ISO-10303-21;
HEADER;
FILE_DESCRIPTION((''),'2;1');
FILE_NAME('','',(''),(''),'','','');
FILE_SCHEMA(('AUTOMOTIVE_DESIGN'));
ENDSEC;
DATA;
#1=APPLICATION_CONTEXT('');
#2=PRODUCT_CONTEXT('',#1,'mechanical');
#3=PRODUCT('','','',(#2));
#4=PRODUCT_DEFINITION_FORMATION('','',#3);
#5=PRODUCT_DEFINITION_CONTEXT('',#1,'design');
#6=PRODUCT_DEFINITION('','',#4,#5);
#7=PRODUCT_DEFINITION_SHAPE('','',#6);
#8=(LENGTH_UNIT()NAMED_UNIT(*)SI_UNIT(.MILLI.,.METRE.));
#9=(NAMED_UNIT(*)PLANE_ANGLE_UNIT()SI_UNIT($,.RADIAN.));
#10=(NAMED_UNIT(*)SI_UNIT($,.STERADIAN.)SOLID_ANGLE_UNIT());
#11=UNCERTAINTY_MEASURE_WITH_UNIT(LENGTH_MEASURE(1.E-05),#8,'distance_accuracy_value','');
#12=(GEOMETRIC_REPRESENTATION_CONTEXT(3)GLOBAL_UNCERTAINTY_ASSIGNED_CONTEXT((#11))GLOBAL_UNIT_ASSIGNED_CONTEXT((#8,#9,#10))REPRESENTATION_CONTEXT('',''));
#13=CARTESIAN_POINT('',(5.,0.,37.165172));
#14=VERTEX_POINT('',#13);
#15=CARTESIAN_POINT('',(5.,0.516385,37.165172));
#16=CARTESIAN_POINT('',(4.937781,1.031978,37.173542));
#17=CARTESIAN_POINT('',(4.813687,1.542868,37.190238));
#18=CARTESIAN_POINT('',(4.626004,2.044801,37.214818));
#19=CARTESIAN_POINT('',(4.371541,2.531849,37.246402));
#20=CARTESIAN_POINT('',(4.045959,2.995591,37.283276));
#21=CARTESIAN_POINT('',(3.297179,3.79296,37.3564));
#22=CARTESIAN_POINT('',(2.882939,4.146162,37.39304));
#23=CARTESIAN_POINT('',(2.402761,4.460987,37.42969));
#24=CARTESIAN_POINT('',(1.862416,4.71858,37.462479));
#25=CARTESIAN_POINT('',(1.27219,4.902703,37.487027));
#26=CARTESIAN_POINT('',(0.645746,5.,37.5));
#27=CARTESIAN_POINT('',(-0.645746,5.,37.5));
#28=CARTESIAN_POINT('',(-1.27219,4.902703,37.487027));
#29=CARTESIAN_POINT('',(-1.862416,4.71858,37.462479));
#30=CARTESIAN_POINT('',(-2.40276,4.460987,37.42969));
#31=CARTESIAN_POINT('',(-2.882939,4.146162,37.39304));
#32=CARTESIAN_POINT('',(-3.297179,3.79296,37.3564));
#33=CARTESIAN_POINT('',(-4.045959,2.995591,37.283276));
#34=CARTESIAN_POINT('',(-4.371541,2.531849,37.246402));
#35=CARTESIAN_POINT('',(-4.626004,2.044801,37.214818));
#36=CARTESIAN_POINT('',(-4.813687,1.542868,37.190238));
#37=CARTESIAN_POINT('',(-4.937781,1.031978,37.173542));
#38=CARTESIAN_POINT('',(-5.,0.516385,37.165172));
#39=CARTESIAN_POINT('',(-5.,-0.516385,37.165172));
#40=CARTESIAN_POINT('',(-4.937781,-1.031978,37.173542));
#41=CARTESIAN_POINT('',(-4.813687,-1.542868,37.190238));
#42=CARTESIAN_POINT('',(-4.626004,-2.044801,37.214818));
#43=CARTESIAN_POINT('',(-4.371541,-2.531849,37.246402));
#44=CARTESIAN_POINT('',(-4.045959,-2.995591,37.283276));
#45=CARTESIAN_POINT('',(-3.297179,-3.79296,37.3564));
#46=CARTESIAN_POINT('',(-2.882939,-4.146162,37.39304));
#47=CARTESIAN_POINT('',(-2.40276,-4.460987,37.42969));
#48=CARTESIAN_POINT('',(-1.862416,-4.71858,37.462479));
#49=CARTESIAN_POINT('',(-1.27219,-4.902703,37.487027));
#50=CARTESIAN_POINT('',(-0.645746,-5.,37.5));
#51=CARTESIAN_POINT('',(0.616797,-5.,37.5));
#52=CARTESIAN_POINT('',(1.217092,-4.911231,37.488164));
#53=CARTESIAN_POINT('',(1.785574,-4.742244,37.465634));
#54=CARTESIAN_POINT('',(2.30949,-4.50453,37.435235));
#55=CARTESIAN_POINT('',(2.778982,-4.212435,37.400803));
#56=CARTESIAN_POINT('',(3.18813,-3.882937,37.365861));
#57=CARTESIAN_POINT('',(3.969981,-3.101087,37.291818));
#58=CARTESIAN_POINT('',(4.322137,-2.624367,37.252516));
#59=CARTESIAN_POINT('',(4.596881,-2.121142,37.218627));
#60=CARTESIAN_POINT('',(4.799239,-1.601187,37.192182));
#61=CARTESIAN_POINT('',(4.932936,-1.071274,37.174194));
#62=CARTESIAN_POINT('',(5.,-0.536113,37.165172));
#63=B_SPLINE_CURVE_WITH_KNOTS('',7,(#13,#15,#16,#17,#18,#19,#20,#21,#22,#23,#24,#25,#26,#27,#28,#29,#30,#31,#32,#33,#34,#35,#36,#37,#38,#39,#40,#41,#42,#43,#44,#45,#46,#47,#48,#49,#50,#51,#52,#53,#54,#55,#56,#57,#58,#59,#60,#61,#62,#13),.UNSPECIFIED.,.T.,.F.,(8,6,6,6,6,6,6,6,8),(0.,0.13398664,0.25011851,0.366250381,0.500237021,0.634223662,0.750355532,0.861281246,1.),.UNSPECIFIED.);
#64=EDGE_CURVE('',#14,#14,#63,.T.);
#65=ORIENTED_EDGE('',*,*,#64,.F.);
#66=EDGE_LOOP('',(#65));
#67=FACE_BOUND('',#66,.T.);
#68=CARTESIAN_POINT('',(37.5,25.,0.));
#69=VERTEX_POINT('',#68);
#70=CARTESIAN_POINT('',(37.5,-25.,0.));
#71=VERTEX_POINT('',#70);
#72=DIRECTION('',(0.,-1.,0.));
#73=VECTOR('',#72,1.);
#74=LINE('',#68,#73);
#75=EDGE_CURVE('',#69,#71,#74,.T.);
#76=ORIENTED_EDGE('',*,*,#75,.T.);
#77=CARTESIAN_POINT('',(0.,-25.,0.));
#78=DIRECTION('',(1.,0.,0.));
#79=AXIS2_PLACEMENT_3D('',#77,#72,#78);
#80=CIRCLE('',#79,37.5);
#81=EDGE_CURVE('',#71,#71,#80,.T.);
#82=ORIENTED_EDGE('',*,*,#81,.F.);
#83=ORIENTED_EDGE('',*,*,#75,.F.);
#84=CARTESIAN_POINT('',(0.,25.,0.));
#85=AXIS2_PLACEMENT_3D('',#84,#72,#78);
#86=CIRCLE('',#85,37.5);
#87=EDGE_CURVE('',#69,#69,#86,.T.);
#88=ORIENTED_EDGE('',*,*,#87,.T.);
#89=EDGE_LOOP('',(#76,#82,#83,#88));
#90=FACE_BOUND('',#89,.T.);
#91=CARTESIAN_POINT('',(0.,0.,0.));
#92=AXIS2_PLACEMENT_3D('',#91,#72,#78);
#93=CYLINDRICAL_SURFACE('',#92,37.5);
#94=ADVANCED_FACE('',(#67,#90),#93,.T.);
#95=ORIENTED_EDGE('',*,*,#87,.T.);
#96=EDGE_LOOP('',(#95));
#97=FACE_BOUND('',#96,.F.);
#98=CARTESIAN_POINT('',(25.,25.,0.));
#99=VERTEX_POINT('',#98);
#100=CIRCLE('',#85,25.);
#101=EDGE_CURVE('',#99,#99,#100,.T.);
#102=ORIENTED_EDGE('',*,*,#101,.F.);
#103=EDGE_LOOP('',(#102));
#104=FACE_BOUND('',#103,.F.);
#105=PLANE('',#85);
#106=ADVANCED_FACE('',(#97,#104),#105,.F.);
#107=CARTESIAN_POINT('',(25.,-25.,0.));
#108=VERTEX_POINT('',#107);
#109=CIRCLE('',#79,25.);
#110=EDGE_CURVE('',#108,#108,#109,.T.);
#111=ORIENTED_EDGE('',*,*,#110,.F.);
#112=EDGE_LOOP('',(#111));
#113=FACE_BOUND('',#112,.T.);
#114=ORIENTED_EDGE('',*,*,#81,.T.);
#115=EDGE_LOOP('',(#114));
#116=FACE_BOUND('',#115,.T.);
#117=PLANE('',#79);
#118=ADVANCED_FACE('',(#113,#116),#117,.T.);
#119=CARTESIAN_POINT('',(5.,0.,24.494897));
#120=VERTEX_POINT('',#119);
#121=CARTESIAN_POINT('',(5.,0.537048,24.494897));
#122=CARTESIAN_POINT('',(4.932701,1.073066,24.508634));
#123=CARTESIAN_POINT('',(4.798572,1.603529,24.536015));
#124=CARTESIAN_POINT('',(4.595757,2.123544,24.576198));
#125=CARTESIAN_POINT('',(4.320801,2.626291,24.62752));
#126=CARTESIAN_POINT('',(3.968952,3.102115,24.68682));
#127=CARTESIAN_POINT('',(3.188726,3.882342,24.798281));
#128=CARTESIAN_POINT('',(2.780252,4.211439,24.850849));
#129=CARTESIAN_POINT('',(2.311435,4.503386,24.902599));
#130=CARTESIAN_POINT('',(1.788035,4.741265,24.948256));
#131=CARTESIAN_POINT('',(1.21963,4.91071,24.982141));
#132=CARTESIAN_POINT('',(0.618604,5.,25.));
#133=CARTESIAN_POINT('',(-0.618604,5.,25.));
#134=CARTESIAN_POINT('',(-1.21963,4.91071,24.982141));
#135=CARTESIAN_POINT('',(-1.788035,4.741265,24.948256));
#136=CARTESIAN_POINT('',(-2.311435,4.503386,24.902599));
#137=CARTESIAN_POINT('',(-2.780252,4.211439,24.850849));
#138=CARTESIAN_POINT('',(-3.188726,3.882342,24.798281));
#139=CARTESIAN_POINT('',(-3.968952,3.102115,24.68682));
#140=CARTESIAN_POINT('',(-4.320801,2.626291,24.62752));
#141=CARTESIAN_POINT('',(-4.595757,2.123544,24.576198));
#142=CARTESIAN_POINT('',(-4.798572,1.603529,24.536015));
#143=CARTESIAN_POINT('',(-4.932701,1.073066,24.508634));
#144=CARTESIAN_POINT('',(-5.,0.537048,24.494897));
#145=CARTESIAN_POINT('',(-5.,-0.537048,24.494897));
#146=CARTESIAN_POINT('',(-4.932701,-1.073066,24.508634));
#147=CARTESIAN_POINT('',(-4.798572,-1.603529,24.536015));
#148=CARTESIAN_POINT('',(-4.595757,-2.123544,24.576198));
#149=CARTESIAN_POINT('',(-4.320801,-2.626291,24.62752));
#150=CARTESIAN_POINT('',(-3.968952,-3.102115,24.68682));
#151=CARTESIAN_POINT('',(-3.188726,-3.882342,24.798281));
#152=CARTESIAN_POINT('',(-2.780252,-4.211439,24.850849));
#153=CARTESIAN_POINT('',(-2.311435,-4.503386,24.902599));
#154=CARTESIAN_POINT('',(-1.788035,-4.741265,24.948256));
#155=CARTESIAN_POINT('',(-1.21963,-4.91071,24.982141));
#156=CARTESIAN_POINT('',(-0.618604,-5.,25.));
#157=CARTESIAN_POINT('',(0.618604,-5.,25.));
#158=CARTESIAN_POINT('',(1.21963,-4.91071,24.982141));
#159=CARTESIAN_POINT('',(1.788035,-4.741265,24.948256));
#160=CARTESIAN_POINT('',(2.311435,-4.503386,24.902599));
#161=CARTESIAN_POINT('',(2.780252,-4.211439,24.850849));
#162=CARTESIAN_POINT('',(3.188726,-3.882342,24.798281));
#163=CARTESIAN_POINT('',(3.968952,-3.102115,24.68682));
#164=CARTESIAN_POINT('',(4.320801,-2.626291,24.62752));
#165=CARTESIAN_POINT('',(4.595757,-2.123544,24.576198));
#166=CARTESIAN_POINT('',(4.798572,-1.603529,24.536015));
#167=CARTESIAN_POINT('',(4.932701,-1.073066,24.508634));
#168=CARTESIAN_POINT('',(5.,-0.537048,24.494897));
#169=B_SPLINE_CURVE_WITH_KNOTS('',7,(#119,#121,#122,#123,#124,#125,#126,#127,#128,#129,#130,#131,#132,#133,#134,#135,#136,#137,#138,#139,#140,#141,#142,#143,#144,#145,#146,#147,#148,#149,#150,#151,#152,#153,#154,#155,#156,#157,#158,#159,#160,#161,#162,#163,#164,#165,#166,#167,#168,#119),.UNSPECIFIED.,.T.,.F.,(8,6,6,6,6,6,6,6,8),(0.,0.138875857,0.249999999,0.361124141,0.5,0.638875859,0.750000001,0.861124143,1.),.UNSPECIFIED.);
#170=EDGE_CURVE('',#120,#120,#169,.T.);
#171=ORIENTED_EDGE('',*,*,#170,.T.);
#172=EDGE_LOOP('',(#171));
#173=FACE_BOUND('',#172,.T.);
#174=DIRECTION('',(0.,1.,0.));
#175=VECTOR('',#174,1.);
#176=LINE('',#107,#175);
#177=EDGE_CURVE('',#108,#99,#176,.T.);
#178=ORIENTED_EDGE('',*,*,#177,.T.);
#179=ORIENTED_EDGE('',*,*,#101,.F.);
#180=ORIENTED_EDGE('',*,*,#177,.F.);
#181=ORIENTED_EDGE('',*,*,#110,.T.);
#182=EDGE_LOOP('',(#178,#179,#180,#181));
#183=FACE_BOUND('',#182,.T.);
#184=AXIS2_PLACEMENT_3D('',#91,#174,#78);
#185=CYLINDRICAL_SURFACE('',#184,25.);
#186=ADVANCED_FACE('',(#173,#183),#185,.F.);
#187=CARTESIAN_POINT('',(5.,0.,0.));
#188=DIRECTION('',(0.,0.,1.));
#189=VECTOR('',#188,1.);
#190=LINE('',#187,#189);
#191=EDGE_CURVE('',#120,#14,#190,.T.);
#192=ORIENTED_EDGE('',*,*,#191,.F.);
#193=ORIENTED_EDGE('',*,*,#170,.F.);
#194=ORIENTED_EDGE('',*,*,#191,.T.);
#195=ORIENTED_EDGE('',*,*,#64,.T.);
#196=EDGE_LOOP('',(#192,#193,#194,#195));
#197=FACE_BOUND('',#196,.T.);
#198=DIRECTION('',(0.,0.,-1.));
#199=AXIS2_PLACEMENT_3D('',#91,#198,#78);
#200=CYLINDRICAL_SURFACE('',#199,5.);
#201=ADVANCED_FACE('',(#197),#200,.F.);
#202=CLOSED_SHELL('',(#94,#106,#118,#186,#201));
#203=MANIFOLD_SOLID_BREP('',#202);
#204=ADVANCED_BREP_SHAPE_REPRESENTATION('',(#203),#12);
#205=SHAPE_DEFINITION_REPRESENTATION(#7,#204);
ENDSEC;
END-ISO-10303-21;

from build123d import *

# Parameters (mm, degrees)
F0_R     = 37.5
F0_R_2   = 25
F1_DEPTH = 25
F2_R     = 5
F3_DEPTH = 37.501


# Not quite as in the source:
# - a feature of the source that left no trace in its solid (it failed there, or was rolled back) is left out


with BuildPart() as f1:
    # F0 (on Front) → F1 (new body, symmetric)
    with BuildSketch(Plane.XZ):
        Circle(F0_R)
        Circle(F0_R_2, mode=Mode.SUBTRACT)
    extrude(amount=F1_DEPTH, both=True)

    # F2 (on Top) → F3 (cut, through all)
    with BuildSketch(Plane.XY):
        Circle(F2_R)
    extrude(amount=F3_DEPTH, mode=Mode.SUBTRACT)


solid = f1.part
